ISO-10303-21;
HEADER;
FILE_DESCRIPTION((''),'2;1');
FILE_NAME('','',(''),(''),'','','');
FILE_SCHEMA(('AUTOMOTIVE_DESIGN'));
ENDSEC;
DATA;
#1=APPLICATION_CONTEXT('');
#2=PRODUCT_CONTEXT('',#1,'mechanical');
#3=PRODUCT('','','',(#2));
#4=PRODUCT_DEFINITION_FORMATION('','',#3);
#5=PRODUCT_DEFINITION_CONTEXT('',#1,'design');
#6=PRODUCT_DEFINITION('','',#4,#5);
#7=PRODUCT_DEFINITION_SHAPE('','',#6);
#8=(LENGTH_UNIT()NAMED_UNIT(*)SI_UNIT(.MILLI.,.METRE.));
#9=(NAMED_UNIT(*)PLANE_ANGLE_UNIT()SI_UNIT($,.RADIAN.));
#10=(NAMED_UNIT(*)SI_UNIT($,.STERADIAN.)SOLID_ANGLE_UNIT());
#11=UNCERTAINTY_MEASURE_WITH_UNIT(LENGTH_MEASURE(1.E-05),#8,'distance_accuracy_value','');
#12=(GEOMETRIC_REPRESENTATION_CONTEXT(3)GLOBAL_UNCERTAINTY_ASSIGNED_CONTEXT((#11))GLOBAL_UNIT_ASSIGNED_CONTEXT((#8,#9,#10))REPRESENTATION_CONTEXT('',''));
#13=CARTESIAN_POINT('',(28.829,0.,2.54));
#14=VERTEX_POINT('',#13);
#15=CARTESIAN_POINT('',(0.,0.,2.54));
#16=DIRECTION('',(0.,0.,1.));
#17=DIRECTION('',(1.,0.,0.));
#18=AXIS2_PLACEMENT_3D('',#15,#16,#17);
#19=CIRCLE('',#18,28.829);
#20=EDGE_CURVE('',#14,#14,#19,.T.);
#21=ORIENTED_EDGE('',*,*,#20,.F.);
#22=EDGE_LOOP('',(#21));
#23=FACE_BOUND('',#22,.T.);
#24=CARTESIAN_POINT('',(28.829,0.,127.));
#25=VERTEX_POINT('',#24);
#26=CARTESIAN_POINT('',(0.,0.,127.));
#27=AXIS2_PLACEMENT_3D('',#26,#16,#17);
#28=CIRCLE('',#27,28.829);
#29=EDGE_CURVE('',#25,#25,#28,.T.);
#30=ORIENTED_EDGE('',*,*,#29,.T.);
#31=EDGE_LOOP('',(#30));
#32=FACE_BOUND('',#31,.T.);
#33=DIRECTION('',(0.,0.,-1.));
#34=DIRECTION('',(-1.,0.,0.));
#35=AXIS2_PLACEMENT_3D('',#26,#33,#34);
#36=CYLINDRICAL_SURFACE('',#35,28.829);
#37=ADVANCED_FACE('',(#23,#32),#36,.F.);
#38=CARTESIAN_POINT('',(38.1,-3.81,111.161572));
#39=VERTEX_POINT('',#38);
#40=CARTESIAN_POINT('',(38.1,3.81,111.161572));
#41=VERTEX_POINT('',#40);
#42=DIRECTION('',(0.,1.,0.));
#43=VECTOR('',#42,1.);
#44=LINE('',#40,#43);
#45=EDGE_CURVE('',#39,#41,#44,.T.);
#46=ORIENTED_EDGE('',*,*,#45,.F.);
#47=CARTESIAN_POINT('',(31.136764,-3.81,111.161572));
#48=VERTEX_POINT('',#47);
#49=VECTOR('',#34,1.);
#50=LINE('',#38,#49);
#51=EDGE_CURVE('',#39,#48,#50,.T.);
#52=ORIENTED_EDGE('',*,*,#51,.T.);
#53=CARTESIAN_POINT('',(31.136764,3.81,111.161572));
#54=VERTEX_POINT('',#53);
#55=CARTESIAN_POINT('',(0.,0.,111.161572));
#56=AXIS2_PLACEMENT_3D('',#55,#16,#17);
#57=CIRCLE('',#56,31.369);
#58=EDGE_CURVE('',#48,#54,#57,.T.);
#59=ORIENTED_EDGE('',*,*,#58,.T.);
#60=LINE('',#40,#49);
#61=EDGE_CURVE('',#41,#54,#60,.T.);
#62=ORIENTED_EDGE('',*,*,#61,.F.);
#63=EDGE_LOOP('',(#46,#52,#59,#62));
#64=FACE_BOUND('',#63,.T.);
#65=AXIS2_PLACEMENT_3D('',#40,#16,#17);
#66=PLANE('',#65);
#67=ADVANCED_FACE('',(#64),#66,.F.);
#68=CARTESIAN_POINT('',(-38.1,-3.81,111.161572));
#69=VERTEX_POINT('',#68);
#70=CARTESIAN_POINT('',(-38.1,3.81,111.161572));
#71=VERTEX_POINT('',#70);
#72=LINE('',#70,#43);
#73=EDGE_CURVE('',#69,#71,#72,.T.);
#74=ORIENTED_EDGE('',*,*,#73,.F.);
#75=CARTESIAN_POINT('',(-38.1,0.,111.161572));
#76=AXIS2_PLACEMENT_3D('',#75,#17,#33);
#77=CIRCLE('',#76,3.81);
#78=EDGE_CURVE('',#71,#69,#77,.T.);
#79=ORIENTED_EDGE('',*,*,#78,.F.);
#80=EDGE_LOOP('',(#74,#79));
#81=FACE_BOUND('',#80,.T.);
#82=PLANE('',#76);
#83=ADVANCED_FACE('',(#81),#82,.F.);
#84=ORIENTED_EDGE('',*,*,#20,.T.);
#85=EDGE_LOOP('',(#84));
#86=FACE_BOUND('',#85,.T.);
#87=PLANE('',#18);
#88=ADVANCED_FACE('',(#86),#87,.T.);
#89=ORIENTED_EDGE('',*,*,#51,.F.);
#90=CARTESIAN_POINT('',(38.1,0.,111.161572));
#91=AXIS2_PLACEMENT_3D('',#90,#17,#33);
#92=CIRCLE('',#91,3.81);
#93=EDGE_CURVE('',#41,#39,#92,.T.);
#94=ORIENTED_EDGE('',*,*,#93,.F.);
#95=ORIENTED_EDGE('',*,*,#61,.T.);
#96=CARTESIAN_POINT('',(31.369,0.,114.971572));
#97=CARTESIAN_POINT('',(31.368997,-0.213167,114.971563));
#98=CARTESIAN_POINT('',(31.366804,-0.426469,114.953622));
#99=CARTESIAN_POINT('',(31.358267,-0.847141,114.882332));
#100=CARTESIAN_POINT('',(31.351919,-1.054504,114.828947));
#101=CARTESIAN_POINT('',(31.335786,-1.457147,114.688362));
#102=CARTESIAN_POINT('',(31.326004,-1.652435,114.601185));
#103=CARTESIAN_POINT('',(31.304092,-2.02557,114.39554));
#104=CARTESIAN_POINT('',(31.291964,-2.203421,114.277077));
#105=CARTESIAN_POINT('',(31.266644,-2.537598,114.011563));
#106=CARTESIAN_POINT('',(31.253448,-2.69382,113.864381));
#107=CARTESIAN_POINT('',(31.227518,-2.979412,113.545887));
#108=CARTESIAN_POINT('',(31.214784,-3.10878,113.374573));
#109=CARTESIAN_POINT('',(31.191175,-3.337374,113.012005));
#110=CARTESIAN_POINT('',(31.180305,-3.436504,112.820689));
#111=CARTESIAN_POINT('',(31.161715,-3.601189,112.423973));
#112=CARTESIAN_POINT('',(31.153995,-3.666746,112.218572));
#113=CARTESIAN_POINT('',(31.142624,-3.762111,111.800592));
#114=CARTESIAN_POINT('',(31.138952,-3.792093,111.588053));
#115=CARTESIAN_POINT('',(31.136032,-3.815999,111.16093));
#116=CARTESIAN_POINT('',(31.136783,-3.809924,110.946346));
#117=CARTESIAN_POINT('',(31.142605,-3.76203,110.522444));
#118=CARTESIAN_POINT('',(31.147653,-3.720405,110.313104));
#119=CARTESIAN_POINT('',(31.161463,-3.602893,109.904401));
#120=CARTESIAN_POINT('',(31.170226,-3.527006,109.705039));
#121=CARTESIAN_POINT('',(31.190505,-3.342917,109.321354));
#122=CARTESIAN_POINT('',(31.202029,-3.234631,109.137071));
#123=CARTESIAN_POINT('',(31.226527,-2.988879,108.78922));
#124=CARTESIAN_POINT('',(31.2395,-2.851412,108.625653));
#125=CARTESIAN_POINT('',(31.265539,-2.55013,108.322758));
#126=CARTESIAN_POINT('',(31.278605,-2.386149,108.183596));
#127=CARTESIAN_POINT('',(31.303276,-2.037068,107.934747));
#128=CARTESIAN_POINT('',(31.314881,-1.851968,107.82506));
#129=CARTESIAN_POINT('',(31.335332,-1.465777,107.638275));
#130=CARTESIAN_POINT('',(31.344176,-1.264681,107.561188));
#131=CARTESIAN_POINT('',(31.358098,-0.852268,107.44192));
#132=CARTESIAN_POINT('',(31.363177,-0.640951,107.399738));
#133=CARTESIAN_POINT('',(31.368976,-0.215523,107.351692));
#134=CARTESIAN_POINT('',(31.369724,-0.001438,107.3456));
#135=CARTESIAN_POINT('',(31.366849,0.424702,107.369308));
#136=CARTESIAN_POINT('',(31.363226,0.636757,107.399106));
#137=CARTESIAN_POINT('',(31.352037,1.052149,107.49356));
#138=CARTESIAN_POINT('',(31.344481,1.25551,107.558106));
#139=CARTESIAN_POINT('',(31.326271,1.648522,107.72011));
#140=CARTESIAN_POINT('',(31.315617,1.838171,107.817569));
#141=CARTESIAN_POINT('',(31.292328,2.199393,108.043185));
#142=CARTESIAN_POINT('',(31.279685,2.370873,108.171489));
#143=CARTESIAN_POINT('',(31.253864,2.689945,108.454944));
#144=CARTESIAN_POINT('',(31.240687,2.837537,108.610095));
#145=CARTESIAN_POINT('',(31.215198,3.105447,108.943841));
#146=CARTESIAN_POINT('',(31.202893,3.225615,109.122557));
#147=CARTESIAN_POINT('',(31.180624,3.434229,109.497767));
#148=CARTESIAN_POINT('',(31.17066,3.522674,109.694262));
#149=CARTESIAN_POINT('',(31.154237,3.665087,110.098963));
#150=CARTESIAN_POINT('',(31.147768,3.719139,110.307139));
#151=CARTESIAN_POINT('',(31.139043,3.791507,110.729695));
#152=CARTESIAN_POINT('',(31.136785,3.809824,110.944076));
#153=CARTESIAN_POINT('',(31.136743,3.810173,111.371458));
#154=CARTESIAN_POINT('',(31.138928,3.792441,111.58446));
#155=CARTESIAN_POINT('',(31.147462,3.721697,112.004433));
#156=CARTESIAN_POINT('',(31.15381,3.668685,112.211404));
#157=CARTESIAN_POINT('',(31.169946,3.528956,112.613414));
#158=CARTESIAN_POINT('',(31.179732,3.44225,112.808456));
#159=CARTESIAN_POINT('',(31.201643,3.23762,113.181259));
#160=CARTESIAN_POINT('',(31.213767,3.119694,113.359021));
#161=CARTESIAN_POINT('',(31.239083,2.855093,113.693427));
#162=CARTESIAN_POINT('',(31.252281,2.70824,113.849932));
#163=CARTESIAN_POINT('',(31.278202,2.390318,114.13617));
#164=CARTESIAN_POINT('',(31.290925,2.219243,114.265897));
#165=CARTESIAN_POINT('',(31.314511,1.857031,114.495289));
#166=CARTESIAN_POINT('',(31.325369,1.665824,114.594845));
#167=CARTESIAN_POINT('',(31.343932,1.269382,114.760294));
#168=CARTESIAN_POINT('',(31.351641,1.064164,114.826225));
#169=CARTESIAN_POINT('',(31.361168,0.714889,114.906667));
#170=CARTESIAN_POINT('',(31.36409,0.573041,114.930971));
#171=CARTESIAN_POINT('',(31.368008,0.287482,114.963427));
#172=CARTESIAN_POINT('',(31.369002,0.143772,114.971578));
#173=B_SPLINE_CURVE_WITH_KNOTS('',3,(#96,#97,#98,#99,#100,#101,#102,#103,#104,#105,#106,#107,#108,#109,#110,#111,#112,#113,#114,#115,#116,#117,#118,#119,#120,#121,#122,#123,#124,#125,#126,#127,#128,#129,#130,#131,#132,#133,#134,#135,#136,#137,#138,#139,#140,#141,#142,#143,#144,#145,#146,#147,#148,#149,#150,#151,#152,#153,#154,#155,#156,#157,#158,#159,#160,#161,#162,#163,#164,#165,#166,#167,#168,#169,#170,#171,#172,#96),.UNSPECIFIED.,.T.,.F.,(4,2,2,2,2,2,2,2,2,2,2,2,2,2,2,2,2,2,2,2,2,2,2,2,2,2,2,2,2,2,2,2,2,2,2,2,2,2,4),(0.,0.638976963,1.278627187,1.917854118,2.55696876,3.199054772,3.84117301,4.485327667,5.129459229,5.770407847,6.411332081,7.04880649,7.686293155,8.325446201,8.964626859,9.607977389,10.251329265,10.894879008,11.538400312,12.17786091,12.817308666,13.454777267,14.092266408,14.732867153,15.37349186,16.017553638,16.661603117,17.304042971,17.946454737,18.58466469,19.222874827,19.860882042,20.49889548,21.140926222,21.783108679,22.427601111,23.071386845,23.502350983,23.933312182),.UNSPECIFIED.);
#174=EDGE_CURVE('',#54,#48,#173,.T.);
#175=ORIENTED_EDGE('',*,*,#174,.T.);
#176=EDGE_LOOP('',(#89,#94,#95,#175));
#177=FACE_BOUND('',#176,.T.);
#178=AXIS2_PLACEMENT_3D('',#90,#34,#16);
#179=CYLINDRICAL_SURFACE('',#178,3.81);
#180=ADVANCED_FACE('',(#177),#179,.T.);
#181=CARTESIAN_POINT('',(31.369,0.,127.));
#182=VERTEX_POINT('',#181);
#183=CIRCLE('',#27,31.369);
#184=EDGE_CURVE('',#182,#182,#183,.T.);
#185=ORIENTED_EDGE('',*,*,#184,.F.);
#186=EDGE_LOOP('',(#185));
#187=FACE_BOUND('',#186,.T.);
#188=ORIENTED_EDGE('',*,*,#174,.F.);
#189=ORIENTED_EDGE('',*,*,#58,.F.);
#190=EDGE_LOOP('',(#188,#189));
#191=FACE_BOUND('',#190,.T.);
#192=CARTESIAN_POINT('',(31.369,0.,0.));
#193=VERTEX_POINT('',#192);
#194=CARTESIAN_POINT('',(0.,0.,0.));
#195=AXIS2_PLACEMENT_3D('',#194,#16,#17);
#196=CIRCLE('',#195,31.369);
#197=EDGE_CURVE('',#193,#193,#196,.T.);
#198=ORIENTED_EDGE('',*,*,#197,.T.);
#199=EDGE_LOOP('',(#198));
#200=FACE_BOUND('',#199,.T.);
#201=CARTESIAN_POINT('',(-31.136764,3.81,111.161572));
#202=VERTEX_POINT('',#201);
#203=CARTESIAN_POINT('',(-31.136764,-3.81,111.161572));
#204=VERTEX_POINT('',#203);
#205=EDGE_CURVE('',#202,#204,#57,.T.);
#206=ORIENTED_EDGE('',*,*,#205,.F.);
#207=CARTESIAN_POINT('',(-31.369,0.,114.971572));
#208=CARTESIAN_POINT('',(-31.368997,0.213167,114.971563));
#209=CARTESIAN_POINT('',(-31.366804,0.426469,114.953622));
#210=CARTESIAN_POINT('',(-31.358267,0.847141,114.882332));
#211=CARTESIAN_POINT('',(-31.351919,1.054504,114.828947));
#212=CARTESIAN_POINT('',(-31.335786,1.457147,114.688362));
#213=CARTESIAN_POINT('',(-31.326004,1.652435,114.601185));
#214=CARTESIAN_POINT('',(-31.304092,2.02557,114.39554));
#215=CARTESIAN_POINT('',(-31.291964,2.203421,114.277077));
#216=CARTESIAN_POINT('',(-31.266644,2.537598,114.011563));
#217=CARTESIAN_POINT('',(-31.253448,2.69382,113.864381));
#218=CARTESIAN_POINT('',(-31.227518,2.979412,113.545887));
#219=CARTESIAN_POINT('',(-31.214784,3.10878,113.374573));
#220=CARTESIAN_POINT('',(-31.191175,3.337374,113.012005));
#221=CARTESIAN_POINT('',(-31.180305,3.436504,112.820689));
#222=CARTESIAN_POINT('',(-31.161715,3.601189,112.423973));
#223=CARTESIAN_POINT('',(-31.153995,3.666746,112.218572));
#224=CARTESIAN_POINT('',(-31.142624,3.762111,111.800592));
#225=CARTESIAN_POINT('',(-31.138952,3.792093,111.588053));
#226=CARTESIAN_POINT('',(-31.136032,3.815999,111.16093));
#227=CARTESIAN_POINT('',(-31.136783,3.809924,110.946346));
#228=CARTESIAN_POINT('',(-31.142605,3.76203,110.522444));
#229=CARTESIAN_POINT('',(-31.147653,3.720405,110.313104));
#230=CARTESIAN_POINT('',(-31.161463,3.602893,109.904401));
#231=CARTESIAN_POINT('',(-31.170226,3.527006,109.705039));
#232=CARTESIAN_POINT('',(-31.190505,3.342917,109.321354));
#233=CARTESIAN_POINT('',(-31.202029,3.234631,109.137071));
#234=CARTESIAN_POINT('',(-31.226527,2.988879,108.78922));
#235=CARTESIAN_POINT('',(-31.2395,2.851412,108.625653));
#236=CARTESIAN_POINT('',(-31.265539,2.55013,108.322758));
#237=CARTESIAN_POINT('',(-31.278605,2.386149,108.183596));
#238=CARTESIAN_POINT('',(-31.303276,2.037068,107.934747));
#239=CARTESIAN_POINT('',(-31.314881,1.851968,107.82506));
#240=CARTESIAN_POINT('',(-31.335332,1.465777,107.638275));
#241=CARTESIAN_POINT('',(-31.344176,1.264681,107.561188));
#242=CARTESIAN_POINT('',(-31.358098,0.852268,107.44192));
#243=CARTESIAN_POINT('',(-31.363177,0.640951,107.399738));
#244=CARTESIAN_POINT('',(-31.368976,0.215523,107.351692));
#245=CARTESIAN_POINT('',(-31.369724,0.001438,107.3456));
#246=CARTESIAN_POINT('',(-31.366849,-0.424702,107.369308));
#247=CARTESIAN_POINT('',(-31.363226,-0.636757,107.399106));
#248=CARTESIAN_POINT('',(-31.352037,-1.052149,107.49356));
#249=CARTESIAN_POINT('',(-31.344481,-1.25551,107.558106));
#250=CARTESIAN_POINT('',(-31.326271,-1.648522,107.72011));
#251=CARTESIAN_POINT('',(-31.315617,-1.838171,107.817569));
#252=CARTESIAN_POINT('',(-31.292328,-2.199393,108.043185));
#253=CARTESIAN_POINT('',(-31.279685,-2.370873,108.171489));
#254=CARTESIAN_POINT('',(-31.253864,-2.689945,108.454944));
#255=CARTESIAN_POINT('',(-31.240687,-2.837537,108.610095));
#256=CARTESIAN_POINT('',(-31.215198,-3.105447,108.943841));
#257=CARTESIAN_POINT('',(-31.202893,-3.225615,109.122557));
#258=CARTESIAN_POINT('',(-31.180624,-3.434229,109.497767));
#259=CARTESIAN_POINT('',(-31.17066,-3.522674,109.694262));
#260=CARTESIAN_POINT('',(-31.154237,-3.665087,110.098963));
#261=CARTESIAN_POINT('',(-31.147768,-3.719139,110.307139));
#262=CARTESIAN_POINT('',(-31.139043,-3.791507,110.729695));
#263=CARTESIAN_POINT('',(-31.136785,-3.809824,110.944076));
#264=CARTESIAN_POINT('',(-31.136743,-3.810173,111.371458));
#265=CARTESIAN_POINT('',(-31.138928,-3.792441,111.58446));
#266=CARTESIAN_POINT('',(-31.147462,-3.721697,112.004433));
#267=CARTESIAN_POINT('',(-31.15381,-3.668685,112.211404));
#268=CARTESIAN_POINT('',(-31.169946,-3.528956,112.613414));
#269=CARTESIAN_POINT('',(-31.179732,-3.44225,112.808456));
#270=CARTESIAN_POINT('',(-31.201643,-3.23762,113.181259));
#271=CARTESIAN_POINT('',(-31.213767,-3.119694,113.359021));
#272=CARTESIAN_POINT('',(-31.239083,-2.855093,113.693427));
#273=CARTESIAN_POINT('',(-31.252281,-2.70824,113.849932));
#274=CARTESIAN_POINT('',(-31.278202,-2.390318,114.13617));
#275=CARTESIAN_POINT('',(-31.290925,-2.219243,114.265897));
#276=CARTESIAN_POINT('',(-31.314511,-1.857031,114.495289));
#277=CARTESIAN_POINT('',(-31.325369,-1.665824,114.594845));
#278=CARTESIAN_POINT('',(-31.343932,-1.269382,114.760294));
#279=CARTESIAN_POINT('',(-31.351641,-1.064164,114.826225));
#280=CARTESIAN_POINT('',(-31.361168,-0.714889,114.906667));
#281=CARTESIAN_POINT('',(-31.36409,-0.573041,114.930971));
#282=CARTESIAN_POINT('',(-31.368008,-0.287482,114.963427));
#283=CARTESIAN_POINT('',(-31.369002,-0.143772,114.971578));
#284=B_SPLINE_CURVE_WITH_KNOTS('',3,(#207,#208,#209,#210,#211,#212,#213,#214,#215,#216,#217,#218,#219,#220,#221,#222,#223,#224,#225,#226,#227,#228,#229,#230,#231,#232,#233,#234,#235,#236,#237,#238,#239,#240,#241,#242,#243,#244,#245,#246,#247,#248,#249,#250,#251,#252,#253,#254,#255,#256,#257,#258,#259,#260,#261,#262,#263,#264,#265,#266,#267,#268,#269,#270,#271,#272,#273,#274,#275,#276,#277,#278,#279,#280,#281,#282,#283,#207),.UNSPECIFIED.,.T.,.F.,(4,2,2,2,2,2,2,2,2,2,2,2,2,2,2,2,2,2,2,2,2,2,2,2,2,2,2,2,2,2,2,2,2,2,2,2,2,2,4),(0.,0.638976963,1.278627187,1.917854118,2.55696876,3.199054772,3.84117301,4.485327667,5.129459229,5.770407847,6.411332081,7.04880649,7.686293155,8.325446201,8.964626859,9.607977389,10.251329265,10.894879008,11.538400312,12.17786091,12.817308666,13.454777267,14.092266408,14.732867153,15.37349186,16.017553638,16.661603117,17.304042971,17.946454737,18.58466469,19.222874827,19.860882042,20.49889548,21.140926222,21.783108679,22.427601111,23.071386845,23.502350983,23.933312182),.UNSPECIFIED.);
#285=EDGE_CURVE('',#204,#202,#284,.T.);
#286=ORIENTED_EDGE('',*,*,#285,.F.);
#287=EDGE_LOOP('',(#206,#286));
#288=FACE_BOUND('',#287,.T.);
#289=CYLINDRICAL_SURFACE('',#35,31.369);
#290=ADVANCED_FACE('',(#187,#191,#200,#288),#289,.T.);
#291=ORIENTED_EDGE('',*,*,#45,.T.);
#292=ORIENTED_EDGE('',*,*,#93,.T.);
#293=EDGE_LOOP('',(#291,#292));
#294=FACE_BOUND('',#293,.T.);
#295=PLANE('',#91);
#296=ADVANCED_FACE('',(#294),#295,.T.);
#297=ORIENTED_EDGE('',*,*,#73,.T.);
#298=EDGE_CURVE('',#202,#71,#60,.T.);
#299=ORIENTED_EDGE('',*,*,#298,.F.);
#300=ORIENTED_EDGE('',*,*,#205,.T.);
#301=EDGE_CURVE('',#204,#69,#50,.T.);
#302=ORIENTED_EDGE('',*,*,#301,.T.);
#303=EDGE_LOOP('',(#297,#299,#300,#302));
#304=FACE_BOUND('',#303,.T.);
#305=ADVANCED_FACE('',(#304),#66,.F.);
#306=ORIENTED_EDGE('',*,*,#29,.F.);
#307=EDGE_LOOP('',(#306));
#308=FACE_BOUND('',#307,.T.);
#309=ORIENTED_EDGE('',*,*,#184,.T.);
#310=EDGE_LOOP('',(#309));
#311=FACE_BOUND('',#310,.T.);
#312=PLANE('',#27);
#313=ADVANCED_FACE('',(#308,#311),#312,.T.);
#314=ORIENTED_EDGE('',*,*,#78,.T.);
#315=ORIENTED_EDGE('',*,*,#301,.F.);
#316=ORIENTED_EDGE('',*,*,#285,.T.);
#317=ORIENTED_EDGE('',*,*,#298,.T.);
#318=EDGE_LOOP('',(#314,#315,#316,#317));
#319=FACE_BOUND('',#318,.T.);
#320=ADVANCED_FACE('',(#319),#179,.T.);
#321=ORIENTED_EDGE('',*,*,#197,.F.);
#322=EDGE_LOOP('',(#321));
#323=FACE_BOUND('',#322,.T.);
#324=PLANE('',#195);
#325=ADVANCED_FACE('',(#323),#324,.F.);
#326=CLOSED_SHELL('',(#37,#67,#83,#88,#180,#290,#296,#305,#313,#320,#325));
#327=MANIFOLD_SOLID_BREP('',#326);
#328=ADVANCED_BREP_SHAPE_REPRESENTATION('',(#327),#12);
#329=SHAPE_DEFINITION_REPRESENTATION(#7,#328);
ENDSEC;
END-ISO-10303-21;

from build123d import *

# Parameters (mm, degrees)
SKETCH1_R                = 31.369
BOSS_EXTRUDE1_DEPTH      = 127
BOSS_EXTRUDE2_DEPTH      = 38.1
BOSS_EXTRUDE2_DEPTH_BACK = 38.1
SHELL3_START             = 2.54
SHELL3_OUTLINE_R         = 28.829
SHELL3_DEPTH             = 124.46


# Read off the part's stored shape, not the designer's step: Shell3
with BuildPart() as part:
    # Sketch1 → Boss-Extrude1 (new body)
    with BuildSketch(Plane.XY):
        Circle(SKETCH1_R)
    extrude(amount=BOSS_EXTRUDE1_DEPTH)

    # Sketch2 → Boss-Extrude2 (add, two sides: drawn at the far end of the back side and taken through both)
    with BuildSketch(Plane(origin=(0, 0, 0), x_dir=(0, 0, -1), z_dir=(1, 0, 0)).offset(-BOSS_EXTRUDE2_DEPTH_BACK)):
        with BuildLine():
            Line((-111.161571782, 3.81), (-111.161571782, -3.81))
            ThreePointArc((-111.161571782, -3.81), (-114.971571782, 0), (-111.161571782, 3.81))
        make_face()
    extrude(amount=BOSS_EXTRUDE2_DEPTH + BOSS_EXTRUDE2_DEPTH_BACK)

    # Shell3 outline → Shell3 (cut)
    with BuildSketch(Plane.XY.offset(SHELL3_START)):
        Circle(SHELL3_OUTLINE_R)
    extrude(amount=SHELL3_DEPTH, mode=Mode.SUBTRACT)


solid = part.part
